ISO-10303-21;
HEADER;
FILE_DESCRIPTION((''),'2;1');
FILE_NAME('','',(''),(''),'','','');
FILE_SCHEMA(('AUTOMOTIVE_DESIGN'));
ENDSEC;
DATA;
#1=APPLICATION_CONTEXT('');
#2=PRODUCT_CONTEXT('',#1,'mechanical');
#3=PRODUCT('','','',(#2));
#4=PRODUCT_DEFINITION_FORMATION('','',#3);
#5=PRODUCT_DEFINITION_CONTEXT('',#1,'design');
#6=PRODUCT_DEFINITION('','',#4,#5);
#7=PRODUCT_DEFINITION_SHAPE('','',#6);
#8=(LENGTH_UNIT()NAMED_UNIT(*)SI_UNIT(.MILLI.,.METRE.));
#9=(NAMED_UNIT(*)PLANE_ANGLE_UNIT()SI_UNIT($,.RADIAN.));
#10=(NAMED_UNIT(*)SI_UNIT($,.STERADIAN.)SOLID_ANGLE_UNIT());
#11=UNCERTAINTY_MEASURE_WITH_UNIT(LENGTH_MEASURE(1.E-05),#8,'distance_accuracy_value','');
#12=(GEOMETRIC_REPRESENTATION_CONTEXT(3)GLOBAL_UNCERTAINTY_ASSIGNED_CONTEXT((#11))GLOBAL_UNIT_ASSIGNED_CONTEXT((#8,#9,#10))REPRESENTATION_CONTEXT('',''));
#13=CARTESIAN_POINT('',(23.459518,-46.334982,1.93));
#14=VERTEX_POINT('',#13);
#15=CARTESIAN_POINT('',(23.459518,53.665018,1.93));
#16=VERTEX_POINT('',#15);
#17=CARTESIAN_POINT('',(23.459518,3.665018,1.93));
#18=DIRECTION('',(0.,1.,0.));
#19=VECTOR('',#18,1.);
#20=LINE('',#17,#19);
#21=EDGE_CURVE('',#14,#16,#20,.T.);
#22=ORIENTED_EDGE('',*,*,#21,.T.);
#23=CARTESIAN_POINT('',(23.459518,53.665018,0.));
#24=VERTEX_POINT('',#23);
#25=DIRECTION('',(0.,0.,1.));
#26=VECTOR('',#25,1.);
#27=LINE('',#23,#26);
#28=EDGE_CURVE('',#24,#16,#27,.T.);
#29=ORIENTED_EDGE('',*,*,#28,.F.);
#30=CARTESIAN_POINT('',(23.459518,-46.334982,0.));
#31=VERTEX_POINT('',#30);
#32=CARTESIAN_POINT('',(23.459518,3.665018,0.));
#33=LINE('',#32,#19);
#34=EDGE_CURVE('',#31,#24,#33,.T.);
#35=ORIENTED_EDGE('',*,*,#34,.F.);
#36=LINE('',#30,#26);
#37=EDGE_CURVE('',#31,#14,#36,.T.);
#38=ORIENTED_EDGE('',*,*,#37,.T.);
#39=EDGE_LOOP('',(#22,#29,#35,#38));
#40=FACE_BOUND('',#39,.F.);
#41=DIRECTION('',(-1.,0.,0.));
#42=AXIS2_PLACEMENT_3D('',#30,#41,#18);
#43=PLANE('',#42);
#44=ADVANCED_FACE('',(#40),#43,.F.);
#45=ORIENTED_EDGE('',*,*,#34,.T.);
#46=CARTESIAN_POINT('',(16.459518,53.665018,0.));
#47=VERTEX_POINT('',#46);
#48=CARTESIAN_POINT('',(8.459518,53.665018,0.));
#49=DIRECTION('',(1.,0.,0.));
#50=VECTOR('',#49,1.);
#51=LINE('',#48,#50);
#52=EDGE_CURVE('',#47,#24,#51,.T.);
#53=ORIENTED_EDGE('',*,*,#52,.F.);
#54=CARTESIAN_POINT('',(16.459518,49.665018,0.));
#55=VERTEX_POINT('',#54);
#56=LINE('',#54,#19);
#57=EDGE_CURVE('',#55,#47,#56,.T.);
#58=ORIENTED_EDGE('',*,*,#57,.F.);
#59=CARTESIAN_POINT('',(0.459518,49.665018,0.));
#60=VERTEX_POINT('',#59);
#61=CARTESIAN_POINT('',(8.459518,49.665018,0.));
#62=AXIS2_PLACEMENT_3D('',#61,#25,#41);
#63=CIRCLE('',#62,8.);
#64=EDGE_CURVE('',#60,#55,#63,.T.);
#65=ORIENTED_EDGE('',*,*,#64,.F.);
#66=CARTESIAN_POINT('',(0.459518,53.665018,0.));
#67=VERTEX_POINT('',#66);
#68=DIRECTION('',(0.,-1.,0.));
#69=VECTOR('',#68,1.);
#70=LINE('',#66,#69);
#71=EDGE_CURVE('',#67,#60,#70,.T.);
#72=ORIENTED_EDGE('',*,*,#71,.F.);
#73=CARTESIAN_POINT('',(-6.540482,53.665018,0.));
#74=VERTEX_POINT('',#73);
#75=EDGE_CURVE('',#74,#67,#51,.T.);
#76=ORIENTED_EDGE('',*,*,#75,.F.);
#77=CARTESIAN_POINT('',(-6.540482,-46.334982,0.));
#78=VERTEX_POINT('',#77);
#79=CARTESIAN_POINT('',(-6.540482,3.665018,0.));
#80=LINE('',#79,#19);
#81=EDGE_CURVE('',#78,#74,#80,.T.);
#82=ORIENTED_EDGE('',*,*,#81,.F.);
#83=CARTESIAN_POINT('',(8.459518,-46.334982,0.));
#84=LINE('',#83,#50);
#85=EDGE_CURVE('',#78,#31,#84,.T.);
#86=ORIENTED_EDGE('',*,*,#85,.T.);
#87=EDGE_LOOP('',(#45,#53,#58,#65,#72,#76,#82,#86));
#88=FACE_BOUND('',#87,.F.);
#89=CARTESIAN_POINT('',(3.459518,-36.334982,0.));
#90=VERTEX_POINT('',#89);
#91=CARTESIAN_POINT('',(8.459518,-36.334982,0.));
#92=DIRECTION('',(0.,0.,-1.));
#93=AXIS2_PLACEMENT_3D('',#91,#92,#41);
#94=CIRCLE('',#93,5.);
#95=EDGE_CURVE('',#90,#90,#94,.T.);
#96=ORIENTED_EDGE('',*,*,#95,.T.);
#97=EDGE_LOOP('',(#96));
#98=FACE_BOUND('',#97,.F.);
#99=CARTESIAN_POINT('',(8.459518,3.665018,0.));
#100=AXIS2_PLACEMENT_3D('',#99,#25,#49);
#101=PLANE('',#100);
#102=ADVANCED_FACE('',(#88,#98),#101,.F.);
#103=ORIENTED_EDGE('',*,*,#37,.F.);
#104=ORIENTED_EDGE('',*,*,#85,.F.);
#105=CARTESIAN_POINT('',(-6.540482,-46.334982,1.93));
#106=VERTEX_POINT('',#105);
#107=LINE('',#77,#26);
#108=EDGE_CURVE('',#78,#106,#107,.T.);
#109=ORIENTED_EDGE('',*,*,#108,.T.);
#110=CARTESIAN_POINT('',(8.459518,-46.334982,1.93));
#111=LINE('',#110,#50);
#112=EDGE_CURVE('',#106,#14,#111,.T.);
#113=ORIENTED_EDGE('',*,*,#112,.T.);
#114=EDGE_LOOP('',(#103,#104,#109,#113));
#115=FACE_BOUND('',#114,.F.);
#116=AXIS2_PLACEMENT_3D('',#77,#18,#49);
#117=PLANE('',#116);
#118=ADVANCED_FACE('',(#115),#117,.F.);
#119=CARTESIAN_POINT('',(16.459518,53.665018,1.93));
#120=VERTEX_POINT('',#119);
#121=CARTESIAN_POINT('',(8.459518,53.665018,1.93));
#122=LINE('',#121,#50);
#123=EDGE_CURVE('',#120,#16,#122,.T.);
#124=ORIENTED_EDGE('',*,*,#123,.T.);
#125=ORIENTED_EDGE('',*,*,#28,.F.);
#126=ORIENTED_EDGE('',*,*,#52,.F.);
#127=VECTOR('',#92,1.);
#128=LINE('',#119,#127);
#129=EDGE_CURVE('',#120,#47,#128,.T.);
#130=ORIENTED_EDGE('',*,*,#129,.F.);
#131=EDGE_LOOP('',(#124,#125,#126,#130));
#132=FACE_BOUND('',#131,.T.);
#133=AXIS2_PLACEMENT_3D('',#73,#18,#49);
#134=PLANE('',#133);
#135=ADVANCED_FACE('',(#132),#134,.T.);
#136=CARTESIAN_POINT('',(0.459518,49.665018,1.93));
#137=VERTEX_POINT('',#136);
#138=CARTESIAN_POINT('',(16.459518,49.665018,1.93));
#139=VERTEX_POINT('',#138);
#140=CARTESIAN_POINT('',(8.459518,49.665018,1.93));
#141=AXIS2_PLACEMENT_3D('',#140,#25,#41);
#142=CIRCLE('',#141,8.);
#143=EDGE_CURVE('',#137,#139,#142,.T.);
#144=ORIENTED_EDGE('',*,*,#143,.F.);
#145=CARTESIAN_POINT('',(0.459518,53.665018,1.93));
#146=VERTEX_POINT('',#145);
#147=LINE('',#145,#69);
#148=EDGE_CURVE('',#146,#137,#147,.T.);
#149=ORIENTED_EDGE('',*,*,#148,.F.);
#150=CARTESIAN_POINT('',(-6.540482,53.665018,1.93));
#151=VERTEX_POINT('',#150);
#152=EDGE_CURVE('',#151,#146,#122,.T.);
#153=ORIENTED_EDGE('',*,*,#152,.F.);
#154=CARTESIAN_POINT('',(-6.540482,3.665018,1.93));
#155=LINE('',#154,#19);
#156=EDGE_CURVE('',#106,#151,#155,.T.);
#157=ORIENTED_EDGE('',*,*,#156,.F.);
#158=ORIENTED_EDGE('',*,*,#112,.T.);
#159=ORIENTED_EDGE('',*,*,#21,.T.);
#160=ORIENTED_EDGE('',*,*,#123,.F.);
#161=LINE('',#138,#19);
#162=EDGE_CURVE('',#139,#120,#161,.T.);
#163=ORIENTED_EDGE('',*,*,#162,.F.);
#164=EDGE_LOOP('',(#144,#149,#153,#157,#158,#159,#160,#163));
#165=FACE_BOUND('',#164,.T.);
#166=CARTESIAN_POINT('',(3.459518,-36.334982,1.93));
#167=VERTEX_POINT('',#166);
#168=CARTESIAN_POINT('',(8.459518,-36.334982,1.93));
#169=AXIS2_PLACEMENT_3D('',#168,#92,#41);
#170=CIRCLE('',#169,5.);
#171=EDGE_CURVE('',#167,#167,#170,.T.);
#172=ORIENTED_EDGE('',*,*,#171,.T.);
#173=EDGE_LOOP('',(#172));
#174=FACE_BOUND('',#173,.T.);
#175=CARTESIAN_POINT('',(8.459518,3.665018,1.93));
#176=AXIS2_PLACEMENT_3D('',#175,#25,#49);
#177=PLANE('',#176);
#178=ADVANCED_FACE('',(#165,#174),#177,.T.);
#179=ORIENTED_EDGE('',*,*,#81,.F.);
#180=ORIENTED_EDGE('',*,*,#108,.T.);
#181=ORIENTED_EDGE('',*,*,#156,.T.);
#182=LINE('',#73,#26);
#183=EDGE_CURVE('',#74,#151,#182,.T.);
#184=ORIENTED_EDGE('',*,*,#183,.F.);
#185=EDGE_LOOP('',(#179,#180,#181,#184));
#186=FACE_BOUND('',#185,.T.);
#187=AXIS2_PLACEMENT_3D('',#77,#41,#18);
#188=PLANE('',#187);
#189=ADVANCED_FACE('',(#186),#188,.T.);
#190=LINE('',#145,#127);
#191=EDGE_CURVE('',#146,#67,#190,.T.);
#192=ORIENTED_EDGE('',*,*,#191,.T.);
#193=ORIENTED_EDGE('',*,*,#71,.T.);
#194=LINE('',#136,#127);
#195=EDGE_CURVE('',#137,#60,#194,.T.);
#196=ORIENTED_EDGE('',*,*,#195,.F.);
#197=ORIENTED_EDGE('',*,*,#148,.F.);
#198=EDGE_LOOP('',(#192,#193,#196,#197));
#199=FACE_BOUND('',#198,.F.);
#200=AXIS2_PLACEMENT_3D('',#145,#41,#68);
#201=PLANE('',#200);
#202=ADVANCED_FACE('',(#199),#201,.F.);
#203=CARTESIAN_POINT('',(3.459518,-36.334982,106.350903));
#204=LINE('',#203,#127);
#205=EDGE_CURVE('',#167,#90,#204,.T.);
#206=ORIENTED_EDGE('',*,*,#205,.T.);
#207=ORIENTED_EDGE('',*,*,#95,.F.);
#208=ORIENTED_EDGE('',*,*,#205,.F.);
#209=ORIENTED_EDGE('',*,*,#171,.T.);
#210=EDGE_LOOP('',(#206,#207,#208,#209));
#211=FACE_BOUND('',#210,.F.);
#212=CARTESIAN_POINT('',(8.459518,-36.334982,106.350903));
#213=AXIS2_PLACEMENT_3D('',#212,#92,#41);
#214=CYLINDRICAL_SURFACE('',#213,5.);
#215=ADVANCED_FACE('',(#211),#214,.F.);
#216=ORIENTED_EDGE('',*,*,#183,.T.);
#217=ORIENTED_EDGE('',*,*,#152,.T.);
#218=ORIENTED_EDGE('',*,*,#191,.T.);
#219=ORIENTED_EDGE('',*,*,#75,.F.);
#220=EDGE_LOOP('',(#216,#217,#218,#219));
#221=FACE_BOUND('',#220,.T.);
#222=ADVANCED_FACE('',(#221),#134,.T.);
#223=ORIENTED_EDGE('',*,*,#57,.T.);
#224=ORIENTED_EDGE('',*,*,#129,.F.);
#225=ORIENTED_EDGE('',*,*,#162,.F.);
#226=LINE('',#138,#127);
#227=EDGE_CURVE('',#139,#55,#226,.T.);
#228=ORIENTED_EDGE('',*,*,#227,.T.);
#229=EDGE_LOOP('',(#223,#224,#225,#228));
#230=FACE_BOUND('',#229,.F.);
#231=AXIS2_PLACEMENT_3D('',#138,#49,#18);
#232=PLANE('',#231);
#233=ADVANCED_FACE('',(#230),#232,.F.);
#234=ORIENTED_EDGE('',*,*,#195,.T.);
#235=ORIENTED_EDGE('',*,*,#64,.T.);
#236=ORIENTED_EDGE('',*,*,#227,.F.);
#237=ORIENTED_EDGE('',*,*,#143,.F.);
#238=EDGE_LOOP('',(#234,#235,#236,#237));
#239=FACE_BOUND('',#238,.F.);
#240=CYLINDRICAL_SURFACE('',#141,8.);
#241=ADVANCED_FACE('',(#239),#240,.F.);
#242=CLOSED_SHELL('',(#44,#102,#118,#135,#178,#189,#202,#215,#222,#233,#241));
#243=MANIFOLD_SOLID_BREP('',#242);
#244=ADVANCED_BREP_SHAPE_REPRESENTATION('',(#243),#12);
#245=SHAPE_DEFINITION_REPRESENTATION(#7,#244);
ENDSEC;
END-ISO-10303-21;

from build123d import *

# Parameters (mm, degrees)
F0_W     = 30
F0_H     = 100
F1_DEPTH = 1.93
F3_D     = 10
F4_DEPTH = 1.93


# Not quite as in the source:
# - a feature names something its author has since deleted; it is built from what else it names


with BuildPart() as f1:
    # F0 (on Top) → F1 (new body)
    with BuildSketch(Plane.XY):
        with Locations((8.4595183283, 3.6650180817)):
            Rectangle(F0_W, F0_H)
    extrude(amount=F1_DEPTH)

    # F3 (through all)
    with Locations(Plane.XY.offset(1.93)):
        with Locations((8.4595183283, -36.3349819183)):
            Hole(F3_D / 2)

    # F2 (on face) → F4 (cut)
    with BuildSketch(Plane.XY.offset(1.93)):
        with BuildLine():
            Line((0.4595183283, 53.6650180817), (0.4595183283, 49.6650180817))
            ThreePointArc((0.4595183283, 49.6650180817), (8.4595183283, 41.6650180817), (16.4595183283, 49.6650180817))
            Line((16.4595183283, 49.6650180817), (16.4595183283, 53.6650180817))
            Line((16.4595183283, 53.6650180817), (0.4595183283, 53.6650180817))
        make_face()
    extrude(amount=-F4_DEPTH, mode=Mode.SUBTRACT)


solid = f1.part
